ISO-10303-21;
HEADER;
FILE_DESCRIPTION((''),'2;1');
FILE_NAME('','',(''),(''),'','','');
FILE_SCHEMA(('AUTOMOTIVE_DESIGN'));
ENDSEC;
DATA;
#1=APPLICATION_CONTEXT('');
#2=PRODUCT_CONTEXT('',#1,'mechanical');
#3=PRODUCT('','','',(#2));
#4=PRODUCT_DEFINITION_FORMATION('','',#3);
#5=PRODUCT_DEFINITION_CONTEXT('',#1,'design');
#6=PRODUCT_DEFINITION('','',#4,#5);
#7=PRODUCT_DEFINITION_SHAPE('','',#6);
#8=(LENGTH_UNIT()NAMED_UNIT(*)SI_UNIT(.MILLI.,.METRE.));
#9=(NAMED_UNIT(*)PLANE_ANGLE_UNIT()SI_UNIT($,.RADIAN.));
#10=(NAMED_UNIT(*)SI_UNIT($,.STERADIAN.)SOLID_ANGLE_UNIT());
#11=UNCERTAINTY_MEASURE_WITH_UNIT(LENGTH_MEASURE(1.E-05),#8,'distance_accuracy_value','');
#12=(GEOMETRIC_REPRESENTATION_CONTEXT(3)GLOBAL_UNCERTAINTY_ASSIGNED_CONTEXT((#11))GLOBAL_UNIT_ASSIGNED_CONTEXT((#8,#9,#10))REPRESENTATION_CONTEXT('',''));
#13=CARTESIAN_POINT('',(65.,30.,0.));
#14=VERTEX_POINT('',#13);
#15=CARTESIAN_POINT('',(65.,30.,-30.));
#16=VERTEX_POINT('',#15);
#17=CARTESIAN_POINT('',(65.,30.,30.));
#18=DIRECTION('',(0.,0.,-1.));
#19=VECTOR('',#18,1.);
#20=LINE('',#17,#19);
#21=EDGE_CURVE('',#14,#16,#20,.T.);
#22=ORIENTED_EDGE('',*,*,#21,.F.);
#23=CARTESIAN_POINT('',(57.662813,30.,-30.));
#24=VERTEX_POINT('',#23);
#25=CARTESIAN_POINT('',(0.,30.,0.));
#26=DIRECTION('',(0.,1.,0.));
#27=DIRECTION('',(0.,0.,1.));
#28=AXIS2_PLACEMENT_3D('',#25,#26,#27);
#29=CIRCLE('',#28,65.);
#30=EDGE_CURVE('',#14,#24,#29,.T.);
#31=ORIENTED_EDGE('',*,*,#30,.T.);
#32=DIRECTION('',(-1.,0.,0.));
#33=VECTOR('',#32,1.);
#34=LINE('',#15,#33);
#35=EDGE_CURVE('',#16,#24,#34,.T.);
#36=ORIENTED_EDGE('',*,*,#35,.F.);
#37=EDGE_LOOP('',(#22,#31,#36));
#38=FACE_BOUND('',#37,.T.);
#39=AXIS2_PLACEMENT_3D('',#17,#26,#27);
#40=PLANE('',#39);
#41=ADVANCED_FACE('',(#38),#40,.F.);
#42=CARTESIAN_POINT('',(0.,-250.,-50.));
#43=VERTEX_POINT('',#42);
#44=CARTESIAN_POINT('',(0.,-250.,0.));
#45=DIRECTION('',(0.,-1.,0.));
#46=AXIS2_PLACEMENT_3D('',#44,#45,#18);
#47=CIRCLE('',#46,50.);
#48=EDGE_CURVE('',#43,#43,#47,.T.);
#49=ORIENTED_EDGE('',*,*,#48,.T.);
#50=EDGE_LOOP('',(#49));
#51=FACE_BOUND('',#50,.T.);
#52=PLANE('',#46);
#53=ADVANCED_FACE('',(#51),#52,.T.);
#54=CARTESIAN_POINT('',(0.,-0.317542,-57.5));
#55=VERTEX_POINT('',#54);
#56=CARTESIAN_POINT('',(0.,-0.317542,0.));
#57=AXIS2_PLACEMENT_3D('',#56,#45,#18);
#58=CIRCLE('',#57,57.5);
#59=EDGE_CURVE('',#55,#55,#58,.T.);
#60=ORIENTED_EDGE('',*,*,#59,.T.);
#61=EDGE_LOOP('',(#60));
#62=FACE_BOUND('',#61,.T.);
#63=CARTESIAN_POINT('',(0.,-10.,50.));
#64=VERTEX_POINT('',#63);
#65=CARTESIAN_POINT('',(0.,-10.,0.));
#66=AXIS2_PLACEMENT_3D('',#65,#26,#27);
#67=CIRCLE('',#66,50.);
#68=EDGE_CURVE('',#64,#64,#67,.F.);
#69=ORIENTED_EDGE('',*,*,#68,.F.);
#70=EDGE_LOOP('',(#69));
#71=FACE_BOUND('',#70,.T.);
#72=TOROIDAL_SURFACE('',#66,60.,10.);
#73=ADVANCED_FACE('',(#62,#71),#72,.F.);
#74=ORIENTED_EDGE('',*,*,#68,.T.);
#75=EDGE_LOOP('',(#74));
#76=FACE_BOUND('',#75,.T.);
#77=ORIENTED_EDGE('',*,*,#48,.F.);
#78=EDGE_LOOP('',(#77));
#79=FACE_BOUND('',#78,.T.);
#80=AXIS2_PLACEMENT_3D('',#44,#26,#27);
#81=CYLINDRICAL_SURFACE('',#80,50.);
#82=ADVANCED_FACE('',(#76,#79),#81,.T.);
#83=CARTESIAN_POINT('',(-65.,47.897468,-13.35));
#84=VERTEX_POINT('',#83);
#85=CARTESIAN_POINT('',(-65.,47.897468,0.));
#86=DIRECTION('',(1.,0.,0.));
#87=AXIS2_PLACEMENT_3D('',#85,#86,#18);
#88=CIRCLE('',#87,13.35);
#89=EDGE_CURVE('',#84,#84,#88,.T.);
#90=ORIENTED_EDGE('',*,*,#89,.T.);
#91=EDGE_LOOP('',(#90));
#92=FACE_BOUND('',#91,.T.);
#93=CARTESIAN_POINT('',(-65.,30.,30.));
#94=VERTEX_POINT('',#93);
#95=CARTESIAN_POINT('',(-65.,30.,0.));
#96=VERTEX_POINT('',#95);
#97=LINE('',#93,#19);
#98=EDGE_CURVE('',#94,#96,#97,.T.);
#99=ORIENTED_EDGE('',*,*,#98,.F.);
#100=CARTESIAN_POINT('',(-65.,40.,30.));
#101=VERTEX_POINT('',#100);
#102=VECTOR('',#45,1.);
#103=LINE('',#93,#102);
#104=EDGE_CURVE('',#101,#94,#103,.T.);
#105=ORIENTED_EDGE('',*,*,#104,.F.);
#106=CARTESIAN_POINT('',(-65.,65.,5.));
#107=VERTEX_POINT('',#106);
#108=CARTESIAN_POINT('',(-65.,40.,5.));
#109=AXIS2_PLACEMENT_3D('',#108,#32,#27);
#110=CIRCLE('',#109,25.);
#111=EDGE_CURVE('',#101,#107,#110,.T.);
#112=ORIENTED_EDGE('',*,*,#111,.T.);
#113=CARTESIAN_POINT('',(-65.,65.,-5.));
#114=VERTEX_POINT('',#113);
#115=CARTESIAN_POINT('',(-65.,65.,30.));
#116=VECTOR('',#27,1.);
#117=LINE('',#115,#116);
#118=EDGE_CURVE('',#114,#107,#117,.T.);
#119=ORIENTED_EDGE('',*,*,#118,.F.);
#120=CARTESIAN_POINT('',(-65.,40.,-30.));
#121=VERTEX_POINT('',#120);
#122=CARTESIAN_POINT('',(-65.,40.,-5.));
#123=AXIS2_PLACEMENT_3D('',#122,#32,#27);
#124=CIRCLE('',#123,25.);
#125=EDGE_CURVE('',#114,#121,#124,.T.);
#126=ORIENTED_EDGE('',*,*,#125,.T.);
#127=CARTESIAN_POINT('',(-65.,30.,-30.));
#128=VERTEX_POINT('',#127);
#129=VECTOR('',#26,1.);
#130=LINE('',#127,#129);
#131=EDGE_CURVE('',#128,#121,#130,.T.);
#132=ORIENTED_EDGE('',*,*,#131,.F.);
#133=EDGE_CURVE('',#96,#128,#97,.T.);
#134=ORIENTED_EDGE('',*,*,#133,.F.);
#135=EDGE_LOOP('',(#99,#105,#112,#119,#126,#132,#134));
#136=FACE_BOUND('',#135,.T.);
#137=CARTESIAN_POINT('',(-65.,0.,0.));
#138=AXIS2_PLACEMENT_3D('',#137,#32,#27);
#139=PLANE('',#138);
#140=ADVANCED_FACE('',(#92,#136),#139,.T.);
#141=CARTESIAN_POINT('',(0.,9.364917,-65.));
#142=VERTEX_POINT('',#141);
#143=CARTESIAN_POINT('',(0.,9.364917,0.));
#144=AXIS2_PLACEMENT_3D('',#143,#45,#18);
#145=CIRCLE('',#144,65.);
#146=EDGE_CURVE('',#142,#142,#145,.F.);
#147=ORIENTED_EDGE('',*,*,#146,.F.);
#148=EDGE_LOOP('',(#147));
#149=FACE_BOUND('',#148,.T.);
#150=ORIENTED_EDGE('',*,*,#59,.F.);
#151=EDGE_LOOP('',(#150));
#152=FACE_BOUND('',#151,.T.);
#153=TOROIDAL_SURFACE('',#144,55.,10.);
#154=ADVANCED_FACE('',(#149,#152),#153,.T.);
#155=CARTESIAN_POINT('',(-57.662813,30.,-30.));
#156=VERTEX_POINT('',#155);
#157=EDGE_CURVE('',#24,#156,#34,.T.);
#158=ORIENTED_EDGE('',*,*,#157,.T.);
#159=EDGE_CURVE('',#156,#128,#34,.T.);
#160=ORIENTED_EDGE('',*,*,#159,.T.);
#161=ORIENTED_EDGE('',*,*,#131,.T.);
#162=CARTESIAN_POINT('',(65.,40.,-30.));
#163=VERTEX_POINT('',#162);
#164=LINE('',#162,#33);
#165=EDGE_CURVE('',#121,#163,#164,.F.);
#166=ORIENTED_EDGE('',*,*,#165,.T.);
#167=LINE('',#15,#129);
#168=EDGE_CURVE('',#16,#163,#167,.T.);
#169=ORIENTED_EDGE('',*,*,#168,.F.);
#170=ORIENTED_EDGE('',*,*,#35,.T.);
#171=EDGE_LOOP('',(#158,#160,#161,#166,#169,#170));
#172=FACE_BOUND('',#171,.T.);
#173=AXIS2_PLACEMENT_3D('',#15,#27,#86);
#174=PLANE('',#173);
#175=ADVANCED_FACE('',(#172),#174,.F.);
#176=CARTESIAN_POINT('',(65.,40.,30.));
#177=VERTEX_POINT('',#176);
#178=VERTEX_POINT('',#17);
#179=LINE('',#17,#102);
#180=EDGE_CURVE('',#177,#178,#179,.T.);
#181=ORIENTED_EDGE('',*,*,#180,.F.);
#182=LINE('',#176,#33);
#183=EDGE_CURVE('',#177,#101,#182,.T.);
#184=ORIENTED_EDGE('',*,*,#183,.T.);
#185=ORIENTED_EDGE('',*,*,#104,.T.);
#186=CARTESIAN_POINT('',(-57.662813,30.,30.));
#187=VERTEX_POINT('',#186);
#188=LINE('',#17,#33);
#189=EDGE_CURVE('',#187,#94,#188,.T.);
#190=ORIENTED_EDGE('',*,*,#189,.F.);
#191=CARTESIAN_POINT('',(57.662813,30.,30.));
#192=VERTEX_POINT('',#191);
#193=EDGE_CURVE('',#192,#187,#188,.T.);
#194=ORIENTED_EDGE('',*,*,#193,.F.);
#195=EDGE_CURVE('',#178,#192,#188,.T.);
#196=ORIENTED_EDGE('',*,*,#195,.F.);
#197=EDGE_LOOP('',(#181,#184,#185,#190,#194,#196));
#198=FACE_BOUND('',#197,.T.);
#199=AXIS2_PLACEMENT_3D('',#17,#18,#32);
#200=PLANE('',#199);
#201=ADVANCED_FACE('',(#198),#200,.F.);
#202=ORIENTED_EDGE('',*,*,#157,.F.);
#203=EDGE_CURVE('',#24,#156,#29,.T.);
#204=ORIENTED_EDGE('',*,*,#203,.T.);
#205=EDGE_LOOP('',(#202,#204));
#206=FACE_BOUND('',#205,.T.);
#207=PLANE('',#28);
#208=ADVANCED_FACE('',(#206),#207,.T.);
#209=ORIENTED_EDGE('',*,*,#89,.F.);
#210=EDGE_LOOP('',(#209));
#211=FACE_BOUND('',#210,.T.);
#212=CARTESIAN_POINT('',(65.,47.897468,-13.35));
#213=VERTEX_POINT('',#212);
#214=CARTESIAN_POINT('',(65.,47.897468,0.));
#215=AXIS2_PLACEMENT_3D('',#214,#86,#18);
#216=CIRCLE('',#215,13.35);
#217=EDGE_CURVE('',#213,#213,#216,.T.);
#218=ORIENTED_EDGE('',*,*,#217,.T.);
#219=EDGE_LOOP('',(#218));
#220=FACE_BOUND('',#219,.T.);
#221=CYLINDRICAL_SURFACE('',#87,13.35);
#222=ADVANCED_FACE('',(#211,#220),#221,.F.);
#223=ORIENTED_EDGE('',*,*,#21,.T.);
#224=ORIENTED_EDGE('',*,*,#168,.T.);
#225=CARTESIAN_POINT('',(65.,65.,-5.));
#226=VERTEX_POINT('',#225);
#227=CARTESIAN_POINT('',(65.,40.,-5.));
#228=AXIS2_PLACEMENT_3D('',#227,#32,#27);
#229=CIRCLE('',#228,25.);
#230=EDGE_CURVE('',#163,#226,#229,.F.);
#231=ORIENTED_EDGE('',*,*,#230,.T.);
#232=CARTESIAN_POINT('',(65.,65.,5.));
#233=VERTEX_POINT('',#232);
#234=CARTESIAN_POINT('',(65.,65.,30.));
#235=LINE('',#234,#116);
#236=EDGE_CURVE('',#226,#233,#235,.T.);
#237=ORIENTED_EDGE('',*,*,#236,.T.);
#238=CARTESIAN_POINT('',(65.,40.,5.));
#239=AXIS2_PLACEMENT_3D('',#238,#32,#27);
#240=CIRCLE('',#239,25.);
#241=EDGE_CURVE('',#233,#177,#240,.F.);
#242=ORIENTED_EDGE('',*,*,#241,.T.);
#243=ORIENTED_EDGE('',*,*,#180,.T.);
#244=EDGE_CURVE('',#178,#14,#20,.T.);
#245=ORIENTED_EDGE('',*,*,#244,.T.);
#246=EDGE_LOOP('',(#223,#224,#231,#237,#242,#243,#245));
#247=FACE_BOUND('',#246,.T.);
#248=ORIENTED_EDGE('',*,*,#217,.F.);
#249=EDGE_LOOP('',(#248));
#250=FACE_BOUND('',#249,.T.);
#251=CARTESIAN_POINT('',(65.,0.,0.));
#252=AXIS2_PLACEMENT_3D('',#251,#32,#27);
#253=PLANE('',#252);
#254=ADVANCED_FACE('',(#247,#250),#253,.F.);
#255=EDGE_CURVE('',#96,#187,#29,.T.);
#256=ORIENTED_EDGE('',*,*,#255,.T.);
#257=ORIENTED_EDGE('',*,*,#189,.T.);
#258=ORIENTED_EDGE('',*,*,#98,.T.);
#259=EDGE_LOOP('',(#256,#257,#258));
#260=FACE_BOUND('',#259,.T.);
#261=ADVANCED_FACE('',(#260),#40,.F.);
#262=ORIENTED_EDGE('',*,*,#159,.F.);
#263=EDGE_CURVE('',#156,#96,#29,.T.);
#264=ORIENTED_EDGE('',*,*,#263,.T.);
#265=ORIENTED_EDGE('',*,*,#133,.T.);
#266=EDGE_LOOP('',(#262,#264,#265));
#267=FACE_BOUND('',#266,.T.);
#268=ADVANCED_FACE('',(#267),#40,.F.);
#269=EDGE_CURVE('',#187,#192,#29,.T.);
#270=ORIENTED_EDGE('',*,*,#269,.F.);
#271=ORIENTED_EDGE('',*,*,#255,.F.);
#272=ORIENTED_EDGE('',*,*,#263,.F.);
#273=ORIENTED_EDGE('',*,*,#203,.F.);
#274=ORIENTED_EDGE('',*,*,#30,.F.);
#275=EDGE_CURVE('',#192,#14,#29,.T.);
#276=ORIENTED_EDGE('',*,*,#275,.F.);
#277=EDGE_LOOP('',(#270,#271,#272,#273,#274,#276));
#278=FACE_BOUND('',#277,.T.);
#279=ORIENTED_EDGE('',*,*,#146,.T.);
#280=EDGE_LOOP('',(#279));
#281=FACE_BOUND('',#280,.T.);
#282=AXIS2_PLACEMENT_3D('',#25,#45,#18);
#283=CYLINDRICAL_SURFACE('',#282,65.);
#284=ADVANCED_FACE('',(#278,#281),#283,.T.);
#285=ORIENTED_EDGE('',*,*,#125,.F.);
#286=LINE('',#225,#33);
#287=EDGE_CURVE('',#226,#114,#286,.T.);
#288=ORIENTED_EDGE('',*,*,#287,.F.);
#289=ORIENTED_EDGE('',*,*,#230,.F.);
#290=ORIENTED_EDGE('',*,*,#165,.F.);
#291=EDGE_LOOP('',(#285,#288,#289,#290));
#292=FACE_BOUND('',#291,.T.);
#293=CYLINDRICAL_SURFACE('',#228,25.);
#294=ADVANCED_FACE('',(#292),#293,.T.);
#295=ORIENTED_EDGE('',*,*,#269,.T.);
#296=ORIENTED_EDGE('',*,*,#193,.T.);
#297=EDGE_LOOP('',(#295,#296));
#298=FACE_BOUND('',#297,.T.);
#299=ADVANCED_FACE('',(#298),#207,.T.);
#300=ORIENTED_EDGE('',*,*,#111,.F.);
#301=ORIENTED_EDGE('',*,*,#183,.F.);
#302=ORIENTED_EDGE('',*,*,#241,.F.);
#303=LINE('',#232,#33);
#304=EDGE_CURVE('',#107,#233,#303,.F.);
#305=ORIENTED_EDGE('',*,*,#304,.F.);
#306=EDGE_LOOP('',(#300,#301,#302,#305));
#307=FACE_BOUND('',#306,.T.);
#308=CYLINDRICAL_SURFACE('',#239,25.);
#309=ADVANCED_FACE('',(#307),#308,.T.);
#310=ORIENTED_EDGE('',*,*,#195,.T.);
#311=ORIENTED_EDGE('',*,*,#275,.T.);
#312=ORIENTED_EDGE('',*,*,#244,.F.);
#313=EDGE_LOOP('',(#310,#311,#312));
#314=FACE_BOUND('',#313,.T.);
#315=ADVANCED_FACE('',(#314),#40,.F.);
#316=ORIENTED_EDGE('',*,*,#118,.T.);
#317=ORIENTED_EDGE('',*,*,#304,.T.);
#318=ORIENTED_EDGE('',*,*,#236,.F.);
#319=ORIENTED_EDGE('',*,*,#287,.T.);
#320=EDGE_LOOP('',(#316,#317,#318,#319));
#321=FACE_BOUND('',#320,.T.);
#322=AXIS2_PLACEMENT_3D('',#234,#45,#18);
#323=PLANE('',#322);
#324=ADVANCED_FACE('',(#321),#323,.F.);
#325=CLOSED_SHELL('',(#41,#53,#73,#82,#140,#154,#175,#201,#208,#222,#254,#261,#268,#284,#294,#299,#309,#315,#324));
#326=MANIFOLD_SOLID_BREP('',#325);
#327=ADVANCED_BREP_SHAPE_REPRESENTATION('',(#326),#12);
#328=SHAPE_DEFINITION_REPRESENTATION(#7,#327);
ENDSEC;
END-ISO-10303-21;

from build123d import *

# Parameters (mm, degrees)
SKETCH1_R           = 65
BOSS_EXTRUDE1_DEPTH = 30
SKETCH2_R           = 50
BOSS_EXTRUDE2_DEPTH = 250
FILLET1_R           = 10
FILLET2_R           = 10
SKETCH3_W           = 60
SKETCH3_H           = 35
BOSS_EXTRUDE3_DEPTH = 65
SKETCH4_R           = 13.35
CUT_EXTRUDE1_DEPTH  = 130
FILLET3_R           = 25


with BuildPart() as part:
    # Sketch1 → Boss-Extrude1 (new body)
    with BuildSketch(Plane(origin=(0, 0, 0), x_dir=(1, 0, 0), z_dir=(0, 1, 0))):
        with Locations(Location((0, 0, 0), (0, 0, 270))):
            Circle(SKETCH1_R)
    extrude(amount=BOSS_EXTRUDE1_DEPTH)

    # Sketch2 → Boss-Extrude2 (add)
    with BuildSketch(Plane.XZ):
        with Locations(Location((0, 0, 0), (0, 0, 90))):
            Circle(SKETCH2_R)
    extrude(amount=BOSS_EXTRUDE2_DEPTH)

    # Fillet1
    fillet1_edges = [part.edges().sort_by_distance(p)[0] for p in [
        (0, 0, -50),
    ]]
    fillet(fillet1_edges, radius=FILLET1_R)

    # Fillet2
    # the kernel refuses this fillet: 10 mm, written as the material it takes off along each edge
    with BuildSketch(Plane(origin=(0, 0, 0), x_dir=(0, 0, 1), z_dir=(-1, 0, 0))) as fillet2_piece_1:
        with BuildLine():
            CenterArc((55, 9.364916731), FILLET2_R, 284.477512186, 75.522487814)
            Line((65, 9.364916731), (66, 9.364916731))
            Line((66, 9.364916731), (66, 0))
            Line((66, 0), (65, -1))
            ThreePointArc((65, -1), (60, -1), (57.75, -1.285787471))
            Line((57.75, -1.285787471), (57.5, -0.317541634))
        make_face()
    revolve(axis=Axis((0, 0, 0), (0, 1, 0)), mode=Mode.SUBTRACT)

    # Sketch3 → Boss-Extrude3 (add, symmetric)
    with BuildSketch(Plane(origin=(0, 0, 0), x_dir=(0, 0, -1), z_dir=(1, 0, 0))):
        with Locations((0, 47.5)):
            Rectangle(SKETCH3_W, SKETCH3_H)
    extrude(amount=BOSS_EXTRUDE3_DEPTH, both=True)

    # Sketch4 → Cut-Extrude1 (cut)
    with BuildSketch(Plane(origin=(65, 0, 0), x_dir=(0, 0, -1), z_dir=(1, 0, 0))):
        with Locations((0, 47.897467929)):
            Circle(SKETCH4_R)
    extrude(amount=-CUT_EXTRUDE1_DEPTH, mode=Mode.SUBTRACT)

    # Fillet3
    fillet3_edges = [part.edges().sort_by_distance(p)[0] for p in [
        (0, 65, 30),
        (0, 65, -30),
    ]]
    fillet(fillet3_edges, radius=FILLET3_R)


solid = part.part
